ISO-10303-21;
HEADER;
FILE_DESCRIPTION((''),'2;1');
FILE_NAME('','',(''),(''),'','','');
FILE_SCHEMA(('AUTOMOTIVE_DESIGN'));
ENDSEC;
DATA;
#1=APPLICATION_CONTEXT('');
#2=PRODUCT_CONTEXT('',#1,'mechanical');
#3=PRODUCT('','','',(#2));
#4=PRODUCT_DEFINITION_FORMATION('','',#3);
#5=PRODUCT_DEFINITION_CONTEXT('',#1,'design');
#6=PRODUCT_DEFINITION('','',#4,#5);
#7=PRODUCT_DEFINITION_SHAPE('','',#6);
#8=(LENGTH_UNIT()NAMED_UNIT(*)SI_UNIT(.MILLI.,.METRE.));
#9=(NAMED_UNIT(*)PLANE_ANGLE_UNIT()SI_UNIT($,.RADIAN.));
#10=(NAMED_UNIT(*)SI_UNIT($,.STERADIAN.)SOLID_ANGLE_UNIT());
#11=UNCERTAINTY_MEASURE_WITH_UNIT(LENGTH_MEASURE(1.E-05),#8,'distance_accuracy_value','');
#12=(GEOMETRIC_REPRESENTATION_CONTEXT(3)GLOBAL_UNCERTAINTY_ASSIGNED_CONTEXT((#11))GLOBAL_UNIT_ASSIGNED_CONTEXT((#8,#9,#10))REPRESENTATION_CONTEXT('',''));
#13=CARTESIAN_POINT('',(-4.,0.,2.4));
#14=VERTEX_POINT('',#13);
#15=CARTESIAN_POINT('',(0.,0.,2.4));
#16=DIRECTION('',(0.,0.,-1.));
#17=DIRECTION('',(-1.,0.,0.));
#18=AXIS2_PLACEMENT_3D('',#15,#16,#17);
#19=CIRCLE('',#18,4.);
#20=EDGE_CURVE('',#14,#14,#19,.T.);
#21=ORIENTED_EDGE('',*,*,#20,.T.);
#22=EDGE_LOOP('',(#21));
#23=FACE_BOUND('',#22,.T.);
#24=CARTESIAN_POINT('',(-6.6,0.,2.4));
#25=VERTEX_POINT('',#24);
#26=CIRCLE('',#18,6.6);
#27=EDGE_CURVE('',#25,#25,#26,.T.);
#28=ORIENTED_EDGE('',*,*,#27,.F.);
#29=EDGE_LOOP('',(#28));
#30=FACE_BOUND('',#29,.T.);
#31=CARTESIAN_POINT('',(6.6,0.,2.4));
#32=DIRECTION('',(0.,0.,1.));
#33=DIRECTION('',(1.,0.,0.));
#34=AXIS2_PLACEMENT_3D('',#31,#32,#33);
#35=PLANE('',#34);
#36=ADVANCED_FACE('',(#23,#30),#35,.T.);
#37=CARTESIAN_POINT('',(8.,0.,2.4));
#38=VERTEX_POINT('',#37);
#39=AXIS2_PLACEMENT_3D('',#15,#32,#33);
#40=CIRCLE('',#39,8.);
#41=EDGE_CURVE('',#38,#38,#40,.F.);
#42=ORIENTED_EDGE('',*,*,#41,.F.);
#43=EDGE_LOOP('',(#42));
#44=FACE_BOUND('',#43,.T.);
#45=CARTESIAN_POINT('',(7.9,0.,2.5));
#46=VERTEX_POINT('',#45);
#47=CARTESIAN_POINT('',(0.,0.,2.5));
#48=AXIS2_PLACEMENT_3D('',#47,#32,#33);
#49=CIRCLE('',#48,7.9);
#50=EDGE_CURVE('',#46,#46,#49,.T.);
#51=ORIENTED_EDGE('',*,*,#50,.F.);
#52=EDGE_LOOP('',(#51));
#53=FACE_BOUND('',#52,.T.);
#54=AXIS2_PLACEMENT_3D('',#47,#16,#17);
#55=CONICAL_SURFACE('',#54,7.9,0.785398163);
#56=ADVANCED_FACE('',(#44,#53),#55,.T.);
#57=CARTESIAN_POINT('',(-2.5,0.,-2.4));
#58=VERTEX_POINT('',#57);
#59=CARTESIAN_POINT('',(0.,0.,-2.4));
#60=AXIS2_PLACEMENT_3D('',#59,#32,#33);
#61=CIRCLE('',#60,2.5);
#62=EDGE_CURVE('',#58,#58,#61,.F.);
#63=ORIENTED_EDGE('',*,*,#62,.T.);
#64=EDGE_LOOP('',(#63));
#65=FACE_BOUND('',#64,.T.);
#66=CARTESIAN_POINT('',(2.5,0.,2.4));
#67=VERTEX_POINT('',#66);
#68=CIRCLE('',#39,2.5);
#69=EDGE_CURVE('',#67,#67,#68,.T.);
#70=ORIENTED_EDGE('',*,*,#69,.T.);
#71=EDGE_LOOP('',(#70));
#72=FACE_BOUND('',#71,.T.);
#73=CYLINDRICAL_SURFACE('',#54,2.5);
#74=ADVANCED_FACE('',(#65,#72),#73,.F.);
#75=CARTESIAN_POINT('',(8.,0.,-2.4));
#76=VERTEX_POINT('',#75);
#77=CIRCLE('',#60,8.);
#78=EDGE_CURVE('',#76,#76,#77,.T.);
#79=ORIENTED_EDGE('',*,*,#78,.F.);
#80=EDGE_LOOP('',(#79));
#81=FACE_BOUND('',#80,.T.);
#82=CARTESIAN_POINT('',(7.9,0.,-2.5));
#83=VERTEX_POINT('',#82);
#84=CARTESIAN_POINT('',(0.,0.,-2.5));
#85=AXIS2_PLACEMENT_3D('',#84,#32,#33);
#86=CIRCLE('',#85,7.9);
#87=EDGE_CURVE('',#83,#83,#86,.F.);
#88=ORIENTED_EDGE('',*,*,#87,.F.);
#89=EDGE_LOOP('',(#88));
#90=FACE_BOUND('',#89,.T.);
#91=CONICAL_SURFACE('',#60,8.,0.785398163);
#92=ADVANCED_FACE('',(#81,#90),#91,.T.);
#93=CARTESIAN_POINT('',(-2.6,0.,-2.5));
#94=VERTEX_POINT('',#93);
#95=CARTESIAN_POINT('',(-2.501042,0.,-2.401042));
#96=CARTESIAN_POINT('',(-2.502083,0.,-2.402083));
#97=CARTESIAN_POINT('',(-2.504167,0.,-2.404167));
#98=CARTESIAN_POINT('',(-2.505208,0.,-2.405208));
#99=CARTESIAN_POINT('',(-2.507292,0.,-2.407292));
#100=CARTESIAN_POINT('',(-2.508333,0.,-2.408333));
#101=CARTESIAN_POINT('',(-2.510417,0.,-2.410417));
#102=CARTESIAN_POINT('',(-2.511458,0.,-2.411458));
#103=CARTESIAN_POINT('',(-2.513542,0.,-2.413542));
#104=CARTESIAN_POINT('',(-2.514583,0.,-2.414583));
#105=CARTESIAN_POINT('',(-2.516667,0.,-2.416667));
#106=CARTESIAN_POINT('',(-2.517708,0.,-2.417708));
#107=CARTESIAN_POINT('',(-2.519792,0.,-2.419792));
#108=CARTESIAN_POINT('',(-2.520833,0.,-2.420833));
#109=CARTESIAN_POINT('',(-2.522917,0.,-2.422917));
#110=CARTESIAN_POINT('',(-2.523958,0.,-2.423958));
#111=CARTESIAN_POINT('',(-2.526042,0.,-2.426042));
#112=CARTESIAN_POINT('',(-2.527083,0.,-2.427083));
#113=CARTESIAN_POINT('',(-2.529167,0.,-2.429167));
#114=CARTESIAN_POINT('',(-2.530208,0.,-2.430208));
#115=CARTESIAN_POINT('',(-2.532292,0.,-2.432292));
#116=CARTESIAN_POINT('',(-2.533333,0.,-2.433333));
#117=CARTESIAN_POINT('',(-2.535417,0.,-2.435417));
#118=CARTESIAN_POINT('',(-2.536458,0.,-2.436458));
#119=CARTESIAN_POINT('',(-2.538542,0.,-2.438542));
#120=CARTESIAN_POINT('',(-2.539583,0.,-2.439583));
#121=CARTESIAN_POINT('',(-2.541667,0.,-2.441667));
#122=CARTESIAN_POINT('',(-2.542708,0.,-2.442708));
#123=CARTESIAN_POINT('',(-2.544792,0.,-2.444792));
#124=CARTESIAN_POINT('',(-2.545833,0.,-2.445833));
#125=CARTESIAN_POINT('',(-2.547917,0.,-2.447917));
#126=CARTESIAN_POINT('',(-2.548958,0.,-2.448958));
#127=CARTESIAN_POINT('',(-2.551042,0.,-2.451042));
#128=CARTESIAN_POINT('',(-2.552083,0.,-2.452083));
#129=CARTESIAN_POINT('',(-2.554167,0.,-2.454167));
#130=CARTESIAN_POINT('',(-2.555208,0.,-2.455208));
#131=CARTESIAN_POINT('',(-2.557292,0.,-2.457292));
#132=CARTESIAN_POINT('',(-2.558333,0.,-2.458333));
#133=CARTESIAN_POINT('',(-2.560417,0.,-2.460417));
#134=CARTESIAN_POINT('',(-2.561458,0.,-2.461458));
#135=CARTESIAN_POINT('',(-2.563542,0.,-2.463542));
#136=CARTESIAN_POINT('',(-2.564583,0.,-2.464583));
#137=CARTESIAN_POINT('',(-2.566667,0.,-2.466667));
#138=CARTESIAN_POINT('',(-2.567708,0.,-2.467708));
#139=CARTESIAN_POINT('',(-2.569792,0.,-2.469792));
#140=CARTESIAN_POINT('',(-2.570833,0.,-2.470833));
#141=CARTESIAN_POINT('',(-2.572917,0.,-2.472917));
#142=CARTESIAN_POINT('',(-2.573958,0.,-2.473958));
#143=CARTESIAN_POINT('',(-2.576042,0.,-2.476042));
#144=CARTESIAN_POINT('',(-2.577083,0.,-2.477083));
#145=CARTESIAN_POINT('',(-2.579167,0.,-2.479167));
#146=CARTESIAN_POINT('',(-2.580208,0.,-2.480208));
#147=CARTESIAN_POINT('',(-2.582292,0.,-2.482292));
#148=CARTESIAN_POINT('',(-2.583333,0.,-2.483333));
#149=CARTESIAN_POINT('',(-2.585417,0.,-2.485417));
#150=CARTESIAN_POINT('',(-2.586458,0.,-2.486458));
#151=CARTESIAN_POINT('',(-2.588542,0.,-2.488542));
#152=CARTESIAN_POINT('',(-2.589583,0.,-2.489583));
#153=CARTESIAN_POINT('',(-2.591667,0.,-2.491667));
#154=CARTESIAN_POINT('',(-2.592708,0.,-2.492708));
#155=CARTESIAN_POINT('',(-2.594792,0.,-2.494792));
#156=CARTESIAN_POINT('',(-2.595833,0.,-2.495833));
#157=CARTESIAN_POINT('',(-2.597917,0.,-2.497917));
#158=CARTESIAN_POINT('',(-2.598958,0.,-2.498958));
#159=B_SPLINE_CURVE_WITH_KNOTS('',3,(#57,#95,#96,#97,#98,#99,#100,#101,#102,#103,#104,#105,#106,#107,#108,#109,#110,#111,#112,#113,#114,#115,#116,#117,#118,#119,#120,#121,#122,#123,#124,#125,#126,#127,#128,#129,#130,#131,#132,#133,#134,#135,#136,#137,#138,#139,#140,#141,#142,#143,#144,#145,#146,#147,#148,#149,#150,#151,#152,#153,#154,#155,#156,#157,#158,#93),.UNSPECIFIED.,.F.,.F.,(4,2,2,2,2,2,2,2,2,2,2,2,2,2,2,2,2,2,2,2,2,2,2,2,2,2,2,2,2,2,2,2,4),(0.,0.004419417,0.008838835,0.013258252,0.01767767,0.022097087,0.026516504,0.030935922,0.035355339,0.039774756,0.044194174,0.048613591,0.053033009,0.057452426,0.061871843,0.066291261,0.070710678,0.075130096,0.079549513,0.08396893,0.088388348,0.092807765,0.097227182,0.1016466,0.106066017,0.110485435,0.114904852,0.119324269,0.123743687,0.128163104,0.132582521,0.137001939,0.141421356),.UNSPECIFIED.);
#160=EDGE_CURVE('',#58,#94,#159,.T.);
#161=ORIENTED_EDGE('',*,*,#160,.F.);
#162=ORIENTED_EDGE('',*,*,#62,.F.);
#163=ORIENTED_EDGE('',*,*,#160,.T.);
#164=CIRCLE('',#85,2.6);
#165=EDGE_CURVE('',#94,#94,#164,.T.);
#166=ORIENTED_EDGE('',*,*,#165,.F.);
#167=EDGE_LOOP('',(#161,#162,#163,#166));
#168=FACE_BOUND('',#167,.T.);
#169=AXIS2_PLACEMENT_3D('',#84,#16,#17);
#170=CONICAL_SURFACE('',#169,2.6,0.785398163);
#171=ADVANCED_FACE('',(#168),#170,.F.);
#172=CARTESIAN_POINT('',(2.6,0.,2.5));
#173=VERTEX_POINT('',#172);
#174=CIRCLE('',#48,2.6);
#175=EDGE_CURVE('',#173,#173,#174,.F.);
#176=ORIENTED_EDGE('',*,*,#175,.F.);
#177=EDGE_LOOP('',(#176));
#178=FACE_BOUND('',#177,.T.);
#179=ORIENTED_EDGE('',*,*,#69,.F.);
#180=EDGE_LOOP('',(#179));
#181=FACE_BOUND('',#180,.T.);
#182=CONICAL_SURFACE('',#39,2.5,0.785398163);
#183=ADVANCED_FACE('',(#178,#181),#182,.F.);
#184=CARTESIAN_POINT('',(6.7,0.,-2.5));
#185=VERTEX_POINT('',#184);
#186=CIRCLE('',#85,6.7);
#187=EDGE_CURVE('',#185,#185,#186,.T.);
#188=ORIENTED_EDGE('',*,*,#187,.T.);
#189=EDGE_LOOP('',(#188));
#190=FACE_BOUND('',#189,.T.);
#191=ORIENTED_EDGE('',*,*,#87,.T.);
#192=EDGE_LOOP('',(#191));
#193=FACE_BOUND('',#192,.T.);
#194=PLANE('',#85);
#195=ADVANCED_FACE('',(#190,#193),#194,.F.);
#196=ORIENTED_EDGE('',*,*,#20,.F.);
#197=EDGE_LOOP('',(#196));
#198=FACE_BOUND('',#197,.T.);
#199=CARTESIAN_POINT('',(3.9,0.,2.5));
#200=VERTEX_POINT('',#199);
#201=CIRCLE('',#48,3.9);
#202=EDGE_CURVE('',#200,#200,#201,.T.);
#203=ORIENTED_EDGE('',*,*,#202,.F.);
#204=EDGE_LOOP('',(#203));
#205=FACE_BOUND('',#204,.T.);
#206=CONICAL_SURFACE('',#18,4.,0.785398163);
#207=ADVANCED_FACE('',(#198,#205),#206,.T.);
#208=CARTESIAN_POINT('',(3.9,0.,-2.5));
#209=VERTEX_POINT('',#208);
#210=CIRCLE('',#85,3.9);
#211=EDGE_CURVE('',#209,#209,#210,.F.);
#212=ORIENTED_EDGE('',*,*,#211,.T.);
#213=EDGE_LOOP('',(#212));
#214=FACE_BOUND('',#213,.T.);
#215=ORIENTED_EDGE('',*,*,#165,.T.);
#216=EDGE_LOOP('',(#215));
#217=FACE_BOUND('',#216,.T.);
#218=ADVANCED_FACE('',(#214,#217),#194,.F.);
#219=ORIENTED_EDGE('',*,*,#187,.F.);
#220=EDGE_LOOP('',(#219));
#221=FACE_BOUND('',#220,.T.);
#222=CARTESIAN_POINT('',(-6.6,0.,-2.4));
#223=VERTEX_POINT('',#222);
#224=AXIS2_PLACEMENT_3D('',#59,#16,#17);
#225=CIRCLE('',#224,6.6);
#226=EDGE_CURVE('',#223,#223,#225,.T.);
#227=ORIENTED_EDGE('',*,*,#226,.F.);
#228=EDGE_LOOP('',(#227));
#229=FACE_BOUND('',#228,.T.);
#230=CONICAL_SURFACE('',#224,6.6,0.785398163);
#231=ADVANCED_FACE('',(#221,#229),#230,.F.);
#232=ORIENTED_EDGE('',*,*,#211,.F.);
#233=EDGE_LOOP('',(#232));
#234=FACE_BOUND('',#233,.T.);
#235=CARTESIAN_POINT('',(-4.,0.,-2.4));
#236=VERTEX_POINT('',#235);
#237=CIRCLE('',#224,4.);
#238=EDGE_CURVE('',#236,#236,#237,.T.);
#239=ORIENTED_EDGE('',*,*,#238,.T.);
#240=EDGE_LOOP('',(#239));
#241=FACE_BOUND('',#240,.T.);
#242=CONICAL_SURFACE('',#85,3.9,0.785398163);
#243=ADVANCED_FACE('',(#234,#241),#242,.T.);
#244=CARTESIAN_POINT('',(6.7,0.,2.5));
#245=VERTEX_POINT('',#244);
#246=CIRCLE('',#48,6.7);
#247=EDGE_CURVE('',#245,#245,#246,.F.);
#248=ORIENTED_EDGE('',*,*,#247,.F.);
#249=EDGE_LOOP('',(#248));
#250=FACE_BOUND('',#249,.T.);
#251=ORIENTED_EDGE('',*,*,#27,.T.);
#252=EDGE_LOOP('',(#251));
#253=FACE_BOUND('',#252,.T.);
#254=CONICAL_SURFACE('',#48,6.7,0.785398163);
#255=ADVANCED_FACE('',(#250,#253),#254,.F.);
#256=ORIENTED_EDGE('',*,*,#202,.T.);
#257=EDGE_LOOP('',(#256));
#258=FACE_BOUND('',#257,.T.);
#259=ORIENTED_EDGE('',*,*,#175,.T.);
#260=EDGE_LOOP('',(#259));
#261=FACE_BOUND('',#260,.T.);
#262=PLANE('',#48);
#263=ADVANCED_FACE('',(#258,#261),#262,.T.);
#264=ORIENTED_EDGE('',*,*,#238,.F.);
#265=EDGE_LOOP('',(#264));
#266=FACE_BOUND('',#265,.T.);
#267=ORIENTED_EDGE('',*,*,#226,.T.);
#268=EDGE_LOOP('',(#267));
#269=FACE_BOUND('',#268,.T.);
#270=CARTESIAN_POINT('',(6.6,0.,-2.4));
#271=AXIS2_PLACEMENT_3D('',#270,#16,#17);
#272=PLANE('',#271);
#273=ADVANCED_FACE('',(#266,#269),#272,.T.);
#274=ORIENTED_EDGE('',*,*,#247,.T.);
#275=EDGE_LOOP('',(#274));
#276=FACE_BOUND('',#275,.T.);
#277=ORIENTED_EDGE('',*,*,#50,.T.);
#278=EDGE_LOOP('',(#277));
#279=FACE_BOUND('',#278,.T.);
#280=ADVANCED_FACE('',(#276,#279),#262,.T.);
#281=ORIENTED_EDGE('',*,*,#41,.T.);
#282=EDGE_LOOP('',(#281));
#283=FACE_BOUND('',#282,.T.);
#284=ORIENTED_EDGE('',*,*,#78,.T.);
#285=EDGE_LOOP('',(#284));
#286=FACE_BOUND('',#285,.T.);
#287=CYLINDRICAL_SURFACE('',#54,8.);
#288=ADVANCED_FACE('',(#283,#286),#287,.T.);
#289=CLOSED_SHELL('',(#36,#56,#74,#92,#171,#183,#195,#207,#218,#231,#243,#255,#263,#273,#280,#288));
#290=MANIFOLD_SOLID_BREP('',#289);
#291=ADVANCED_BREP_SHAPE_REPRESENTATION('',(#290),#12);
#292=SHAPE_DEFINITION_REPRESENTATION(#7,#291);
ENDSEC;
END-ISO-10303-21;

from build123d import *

# Parameters (mm, degrees)
SKIZZE1_R                       = 8
SKIZZE1_R_2                     = 2.5
AUFSATZ_LINEAR_AUSTRAGEN1_DEPTH = 2.5
SKETCH1_W                       = 2.6
SKETCH1_H                       = 0.1
CHAMFER1_SIZE                   = 0.1


with BuildPart() as part:
    # Skizze1 → Aufsatz-Linear austragen1 (new, symmetric)
    with BuildSketch(Plane.XY):
        Circle(SKIZZE1_R)
        Circle(SKIZZE1_R_2, mode=Mode.SUBTRACT)
    extrude(amount=AUFSATZ_LINEAR_AUSTRAGEN1_DEPTH, both=True)

    # Sketch1 → Cut-Revolve1 (revolve, cut)
    with BuildSketch(Plane(origin=(0, 0, 0), x_dir=(1, 0, 0), z_dir=(0, 1, 0)), mode=Mode.PRIVATE) as cut_revolve1_sk:
        with Locations((5.3, 2.45)):
            Rectangle(SKETCH1_W, SKETCH1_H)
        with Locations((5.3, -2.45)):
            Rectangle(SKETCH1_W, SKETCH1_H)
    revolve(cut_revolve1_sk.sketch.rotate(Axis((0, 0, -2.5), (0, 0, 1)), 180), axis=Axis((0, 0, -2.5), (0, 0, 1)), mode=Mode.SUBTRACT)

    # Chamfer1
    chamfer1_edges = [part.edges().sort_by_distance(p)[0] for p in [
        (6.6, 0, -2.5),
        (4, 0, -2.5),
        (4, 0, 2.5),
        (6.6, 0, 2.5),
        (-8, 0, -2.5),
        (-8, 0, 2.5),
        (-2.5, 0, -2.5),
        (-2.5, 0, 2.5),
    ]]
    chamfer(chamfer1_edges, length=CHAMFER1_SIZE - 0.0001)  # a hair under: the kernel refuses the full size


solid = part.part
